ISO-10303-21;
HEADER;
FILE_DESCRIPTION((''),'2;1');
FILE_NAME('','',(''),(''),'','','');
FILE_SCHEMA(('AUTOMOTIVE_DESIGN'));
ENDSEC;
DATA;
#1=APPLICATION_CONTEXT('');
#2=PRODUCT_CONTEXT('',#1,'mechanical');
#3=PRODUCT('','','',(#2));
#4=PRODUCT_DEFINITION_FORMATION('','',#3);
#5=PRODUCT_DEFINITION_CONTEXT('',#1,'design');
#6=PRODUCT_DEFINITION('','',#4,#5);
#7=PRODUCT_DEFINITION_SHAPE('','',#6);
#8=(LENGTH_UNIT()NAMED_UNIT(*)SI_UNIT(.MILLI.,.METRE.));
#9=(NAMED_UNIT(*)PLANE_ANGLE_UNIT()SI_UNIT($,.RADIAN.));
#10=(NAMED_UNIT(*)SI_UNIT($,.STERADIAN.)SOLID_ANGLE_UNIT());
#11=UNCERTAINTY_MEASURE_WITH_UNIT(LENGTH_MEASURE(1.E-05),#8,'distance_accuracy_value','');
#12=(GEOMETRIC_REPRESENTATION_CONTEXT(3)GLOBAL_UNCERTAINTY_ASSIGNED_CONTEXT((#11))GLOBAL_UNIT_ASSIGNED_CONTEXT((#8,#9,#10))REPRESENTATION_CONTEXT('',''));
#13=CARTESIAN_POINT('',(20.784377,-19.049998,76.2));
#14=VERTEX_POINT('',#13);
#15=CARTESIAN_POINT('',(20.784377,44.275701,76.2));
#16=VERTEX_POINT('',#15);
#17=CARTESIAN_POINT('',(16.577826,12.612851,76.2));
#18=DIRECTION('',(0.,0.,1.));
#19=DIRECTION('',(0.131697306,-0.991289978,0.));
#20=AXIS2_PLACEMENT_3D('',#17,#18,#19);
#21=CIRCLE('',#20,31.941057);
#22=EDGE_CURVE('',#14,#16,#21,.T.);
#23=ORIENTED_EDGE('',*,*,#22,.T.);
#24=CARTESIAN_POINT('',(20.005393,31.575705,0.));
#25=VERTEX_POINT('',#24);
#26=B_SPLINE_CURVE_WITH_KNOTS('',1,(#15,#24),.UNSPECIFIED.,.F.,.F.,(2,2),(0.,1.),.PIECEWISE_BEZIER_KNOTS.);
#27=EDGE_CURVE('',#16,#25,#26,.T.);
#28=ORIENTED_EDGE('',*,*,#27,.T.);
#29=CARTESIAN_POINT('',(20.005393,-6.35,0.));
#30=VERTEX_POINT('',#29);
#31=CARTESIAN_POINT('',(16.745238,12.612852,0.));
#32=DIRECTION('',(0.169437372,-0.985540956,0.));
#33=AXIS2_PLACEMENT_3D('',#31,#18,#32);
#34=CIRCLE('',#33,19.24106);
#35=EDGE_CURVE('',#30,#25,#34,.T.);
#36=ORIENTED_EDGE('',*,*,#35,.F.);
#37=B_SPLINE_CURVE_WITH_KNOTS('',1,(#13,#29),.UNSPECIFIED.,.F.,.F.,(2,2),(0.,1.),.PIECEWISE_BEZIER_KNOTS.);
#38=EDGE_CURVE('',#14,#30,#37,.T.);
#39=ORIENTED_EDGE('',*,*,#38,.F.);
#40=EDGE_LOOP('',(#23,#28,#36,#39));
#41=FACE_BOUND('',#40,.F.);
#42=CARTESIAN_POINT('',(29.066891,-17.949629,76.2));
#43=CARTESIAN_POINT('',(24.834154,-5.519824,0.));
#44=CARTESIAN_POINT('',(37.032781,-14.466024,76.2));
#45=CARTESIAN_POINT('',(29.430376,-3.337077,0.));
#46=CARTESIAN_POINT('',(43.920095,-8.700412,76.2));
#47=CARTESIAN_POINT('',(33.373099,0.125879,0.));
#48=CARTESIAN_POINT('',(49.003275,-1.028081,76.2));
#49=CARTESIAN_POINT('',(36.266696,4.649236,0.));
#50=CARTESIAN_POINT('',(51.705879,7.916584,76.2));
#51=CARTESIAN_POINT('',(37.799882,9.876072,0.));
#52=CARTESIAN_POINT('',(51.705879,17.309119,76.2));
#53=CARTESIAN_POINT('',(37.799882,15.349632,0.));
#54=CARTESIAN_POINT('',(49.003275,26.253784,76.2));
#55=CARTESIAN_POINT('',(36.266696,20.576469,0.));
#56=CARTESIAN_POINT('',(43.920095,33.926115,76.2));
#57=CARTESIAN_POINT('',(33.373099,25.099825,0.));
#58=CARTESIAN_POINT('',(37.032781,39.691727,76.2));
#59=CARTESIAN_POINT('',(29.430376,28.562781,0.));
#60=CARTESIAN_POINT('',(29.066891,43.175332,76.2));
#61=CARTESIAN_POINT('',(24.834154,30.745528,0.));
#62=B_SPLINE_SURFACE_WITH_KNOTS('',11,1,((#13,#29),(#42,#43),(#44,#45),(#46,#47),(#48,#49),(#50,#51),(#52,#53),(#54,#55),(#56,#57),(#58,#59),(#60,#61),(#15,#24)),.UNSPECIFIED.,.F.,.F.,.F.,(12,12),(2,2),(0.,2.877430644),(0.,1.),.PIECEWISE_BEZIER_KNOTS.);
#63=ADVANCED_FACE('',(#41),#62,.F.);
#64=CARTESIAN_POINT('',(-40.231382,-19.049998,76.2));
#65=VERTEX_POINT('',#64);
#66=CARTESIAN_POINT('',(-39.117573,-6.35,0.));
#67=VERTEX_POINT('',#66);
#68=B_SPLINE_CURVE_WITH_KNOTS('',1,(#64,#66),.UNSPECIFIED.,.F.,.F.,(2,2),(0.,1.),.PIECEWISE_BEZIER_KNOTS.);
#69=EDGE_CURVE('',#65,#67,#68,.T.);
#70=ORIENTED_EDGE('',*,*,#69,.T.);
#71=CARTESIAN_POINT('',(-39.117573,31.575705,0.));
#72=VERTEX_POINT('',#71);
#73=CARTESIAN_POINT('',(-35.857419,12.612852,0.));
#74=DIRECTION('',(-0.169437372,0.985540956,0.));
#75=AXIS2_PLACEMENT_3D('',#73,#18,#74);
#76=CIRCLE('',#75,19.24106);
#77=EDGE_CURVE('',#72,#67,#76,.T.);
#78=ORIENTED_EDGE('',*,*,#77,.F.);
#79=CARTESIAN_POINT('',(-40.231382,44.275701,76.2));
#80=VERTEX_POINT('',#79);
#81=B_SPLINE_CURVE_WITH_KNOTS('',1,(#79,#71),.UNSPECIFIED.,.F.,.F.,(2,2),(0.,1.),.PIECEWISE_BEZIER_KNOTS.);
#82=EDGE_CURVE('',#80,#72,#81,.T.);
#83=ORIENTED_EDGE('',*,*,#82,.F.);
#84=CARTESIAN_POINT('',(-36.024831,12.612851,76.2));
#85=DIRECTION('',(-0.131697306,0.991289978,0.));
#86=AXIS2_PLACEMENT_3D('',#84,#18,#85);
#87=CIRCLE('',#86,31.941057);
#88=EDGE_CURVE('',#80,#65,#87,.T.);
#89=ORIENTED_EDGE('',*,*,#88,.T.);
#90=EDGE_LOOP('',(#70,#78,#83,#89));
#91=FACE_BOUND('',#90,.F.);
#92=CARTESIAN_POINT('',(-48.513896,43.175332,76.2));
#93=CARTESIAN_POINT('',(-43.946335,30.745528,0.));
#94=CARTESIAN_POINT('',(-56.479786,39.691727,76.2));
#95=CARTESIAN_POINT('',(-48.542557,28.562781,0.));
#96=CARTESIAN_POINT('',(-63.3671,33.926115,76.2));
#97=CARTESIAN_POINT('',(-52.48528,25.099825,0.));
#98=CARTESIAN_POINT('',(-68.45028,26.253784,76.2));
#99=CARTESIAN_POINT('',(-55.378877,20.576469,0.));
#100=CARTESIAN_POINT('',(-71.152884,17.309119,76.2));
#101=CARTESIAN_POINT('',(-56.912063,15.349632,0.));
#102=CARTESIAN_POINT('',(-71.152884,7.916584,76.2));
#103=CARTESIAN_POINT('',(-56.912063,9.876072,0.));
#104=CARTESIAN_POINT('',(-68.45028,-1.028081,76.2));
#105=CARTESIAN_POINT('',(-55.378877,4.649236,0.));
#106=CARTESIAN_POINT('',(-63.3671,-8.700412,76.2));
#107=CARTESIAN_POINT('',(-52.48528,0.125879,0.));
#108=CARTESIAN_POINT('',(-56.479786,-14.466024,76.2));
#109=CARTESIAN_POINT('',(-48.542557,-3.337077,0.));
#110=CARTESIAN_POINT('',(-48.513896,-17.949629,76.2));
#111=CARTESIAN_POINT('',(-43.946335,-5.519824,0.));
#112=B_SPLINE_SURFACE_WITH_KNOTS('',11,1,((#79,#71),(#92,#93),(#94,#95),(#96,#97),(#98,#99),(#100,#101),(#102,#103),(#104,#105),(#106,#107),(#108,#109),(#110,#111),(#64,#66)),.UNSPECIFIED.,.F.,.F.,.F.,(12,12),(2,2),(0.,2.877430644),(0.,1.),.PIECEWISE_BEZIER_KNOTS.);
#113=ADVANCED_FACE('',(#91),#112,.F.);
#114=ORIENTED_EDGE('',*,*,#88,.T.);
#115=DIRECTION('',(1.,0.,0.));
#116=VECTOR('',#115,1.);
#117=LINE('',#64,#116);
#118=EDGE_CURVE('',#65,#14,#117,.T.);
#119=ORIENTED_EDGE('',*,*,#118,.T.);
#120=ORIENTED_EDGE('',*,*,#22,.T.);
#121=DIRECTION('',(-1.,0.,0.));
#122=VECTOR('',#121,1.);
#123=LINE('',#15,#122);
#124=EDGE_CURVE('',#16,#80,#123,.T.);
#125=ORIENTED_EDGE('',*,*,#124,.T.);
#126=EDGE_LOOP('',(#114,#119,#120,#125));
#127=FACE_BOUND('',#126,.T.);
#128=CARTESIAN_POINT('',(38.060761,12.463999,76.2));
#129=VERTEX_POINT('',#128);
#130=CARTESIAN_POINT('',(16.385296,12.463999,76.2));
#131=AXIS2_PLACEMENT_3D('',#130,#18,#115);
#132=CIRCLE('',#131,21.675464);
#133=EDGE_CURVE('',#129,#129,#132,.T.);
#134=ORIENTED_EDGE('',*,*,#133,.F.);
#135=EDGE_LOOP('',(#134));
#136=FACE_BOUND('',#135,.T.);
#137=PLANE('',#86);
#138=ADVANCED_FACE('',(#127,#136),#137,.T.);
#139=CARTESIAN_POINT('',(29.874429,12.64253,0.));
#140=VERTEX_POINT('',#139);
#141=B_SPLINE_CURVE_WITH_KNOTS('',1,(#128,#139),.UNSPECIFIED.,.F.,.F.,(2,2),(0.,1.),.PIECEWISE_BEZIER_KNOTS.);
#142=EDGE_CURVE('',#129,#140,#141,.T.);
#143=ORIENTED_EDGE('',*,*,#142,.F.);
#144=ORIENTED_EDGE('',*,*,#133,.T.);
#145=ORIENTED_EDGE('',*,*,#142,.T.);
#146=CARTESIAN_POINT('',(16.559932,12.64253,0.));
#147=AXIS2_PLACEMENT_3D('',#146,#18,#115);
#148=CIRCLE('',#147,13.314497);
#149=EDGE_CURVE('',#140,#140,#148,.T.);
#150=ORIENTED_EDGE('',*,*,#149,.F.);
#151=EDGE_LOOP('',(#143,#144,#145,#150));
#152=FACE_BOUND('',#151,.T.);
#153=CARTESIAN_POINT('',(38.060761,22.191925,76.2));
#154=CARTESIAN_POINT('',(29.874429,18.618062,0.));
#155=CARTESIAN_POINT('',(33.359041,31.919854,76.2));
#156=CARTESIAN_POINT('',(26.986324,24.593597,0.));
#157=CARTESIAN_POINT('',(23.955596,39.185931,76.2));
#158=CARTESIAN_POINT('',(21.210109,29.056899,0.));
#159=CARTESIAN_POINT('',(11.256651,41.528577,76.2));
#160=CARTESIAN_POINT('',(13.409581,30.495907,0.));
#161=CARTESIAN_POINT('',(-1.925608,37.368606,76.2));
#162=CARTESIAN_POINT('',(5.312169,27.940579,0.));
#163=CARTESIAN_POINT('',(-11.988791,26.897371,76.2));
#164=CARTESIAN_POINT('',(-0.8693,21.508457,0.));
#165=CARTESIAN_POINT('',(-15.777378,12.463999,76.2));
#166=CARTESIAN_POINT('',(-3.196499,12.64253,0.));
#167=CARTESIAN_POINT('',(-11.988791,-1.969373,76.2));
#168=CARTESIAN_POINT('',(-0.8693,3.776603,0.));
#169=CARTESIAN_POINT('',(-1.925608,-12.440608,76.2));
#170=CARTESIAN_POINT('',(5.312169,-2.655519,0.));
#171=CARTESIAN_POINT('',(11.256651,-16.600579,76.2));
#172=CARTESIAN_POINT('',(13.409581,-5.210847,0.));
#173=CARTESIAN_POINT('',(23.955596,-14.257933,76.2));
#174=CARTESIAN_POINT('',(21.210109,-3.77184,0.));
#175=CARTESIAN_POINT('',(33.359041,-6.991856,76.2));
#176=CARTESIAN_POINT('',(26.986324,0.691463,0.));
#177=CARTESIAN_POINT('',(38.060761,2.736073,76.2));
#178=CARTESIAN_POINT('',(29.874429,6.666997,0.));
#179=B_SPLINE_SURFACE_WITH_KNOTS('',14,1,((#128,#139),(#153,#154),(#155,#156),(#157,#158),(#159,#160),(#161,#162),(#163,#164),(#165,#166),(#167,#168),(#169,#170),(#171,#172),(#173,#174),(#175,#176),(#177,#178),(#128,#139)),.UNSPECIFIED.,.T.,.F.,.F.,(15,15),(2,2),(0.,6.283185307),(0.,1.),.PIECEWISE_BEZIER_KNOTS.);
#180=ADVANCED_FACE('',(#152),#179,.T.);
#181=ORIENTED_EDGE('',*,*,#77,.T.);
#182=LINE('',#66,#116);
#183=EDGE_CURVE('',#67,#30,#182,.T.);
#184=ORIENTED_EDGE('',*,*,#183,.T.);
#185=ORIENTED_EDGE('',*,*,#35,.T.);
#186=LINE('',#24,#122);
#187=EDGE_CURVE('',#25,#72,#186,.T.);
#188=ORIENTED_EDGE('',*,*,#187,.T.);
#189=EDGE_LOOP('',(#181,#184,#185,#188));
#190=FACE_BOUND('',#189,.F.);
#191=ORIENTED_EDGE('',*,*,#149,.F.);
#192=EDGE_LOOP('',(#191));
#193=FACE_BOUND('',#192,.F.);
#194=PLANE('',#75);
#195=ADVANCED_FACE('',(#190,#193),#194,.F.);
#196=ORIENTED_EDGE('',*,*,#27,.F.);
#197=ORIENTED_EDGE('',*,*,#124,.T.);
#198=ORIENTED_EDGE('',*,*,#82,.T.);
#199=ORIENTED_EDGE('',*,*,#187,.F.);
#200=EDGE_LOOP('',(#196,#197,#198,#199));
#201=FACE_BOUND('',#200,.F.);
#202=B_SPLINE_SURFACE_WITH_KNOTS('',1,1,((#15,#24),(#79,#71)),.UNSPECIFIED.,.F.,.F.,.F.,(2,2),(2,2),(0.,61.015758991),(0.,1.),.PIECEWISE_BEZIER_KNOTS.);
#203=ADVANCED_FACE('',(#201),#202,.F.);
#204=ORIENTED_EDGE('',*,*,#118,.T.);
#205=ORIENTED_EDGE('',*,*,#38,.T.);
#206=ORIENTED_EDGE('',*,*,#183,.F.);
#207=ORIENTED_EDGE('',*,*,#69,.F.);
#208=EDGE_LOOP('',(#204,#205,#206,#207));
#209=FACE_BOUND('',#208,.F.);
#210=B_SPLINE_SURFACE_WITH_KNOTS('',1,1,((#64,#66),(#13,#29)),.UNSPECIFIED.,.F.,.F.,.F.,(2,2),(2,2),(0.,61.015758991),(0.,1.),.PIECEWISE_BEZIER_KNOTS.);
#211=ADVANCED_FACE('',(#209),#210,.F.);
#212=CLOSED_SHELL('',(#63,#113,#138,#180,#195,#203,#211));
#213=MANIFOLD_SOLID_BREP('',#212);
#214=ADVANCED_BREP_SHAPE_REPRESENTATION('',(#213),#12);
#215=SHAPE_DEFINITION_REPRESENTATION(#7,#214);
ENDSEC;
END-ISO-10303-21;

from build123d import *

# Parameters (mm, degrees)
F4_R = 21.6754644631
F5_R = 13.3144971064


with BuildPart() as f3:
    # F2 (on face) → F3 section 0
    with BuildSketch(Plane.XY.offset(76.2)):
        with BuildLine():
            Line((20.7843769666, 44.2757006465), (-40.2313820243, 44.2757006465))
            ThreePointArc((-40.2313820243, 44.2757006465), (-67.9658874869, 12.6128514133), (-40.2313820243, -19.0499978198))
            Line((-40.2313820243, -19.0499978198), (20.7843769666, -19.0499978198))
            ThreePointArc((20.7843769666, -19.0499978198), (48.5188824293, 12.6128514133), (20.7843769666, 44.2757006465))
        make_face()
    # F0 (on Top) → F3 section 1
    with BuildSketch(Plane.XY):
        with BuildLine():
            ThreePointArc((-39.1175734429, 31.5757045358), (-55.0984784521, 12.6128522679), (-39.1175734429, -6.35))
            Line((-39.1175734429, -6.35), (20.0053925244, -6.35))
            ThreePointArc((20.0053925244, -6.35), (35.9862975337, 12.6128522679), (20.0053925244, 31.5757045358))
            Line((20.0053925244, 31.5757045358), (-39.1175734429, 31.5757045358))
        make_face()
    loft()

    # F4 (on face) → F6 section 0
    with BuildSketch(Plane.XY.offset(76.2)):
        with Locations((16.3852963597, 12.4639989808)):
            Circle(F4_R)
    # F5 (on Top) → F6 section 1
    with BuildSketch(Plane.XY):
        with Locations((16.5599323809, 12.6425297931)):
            Circle(F5_R)
    loft(mode=Mode.SUBTRACT)


solid = f3.part
